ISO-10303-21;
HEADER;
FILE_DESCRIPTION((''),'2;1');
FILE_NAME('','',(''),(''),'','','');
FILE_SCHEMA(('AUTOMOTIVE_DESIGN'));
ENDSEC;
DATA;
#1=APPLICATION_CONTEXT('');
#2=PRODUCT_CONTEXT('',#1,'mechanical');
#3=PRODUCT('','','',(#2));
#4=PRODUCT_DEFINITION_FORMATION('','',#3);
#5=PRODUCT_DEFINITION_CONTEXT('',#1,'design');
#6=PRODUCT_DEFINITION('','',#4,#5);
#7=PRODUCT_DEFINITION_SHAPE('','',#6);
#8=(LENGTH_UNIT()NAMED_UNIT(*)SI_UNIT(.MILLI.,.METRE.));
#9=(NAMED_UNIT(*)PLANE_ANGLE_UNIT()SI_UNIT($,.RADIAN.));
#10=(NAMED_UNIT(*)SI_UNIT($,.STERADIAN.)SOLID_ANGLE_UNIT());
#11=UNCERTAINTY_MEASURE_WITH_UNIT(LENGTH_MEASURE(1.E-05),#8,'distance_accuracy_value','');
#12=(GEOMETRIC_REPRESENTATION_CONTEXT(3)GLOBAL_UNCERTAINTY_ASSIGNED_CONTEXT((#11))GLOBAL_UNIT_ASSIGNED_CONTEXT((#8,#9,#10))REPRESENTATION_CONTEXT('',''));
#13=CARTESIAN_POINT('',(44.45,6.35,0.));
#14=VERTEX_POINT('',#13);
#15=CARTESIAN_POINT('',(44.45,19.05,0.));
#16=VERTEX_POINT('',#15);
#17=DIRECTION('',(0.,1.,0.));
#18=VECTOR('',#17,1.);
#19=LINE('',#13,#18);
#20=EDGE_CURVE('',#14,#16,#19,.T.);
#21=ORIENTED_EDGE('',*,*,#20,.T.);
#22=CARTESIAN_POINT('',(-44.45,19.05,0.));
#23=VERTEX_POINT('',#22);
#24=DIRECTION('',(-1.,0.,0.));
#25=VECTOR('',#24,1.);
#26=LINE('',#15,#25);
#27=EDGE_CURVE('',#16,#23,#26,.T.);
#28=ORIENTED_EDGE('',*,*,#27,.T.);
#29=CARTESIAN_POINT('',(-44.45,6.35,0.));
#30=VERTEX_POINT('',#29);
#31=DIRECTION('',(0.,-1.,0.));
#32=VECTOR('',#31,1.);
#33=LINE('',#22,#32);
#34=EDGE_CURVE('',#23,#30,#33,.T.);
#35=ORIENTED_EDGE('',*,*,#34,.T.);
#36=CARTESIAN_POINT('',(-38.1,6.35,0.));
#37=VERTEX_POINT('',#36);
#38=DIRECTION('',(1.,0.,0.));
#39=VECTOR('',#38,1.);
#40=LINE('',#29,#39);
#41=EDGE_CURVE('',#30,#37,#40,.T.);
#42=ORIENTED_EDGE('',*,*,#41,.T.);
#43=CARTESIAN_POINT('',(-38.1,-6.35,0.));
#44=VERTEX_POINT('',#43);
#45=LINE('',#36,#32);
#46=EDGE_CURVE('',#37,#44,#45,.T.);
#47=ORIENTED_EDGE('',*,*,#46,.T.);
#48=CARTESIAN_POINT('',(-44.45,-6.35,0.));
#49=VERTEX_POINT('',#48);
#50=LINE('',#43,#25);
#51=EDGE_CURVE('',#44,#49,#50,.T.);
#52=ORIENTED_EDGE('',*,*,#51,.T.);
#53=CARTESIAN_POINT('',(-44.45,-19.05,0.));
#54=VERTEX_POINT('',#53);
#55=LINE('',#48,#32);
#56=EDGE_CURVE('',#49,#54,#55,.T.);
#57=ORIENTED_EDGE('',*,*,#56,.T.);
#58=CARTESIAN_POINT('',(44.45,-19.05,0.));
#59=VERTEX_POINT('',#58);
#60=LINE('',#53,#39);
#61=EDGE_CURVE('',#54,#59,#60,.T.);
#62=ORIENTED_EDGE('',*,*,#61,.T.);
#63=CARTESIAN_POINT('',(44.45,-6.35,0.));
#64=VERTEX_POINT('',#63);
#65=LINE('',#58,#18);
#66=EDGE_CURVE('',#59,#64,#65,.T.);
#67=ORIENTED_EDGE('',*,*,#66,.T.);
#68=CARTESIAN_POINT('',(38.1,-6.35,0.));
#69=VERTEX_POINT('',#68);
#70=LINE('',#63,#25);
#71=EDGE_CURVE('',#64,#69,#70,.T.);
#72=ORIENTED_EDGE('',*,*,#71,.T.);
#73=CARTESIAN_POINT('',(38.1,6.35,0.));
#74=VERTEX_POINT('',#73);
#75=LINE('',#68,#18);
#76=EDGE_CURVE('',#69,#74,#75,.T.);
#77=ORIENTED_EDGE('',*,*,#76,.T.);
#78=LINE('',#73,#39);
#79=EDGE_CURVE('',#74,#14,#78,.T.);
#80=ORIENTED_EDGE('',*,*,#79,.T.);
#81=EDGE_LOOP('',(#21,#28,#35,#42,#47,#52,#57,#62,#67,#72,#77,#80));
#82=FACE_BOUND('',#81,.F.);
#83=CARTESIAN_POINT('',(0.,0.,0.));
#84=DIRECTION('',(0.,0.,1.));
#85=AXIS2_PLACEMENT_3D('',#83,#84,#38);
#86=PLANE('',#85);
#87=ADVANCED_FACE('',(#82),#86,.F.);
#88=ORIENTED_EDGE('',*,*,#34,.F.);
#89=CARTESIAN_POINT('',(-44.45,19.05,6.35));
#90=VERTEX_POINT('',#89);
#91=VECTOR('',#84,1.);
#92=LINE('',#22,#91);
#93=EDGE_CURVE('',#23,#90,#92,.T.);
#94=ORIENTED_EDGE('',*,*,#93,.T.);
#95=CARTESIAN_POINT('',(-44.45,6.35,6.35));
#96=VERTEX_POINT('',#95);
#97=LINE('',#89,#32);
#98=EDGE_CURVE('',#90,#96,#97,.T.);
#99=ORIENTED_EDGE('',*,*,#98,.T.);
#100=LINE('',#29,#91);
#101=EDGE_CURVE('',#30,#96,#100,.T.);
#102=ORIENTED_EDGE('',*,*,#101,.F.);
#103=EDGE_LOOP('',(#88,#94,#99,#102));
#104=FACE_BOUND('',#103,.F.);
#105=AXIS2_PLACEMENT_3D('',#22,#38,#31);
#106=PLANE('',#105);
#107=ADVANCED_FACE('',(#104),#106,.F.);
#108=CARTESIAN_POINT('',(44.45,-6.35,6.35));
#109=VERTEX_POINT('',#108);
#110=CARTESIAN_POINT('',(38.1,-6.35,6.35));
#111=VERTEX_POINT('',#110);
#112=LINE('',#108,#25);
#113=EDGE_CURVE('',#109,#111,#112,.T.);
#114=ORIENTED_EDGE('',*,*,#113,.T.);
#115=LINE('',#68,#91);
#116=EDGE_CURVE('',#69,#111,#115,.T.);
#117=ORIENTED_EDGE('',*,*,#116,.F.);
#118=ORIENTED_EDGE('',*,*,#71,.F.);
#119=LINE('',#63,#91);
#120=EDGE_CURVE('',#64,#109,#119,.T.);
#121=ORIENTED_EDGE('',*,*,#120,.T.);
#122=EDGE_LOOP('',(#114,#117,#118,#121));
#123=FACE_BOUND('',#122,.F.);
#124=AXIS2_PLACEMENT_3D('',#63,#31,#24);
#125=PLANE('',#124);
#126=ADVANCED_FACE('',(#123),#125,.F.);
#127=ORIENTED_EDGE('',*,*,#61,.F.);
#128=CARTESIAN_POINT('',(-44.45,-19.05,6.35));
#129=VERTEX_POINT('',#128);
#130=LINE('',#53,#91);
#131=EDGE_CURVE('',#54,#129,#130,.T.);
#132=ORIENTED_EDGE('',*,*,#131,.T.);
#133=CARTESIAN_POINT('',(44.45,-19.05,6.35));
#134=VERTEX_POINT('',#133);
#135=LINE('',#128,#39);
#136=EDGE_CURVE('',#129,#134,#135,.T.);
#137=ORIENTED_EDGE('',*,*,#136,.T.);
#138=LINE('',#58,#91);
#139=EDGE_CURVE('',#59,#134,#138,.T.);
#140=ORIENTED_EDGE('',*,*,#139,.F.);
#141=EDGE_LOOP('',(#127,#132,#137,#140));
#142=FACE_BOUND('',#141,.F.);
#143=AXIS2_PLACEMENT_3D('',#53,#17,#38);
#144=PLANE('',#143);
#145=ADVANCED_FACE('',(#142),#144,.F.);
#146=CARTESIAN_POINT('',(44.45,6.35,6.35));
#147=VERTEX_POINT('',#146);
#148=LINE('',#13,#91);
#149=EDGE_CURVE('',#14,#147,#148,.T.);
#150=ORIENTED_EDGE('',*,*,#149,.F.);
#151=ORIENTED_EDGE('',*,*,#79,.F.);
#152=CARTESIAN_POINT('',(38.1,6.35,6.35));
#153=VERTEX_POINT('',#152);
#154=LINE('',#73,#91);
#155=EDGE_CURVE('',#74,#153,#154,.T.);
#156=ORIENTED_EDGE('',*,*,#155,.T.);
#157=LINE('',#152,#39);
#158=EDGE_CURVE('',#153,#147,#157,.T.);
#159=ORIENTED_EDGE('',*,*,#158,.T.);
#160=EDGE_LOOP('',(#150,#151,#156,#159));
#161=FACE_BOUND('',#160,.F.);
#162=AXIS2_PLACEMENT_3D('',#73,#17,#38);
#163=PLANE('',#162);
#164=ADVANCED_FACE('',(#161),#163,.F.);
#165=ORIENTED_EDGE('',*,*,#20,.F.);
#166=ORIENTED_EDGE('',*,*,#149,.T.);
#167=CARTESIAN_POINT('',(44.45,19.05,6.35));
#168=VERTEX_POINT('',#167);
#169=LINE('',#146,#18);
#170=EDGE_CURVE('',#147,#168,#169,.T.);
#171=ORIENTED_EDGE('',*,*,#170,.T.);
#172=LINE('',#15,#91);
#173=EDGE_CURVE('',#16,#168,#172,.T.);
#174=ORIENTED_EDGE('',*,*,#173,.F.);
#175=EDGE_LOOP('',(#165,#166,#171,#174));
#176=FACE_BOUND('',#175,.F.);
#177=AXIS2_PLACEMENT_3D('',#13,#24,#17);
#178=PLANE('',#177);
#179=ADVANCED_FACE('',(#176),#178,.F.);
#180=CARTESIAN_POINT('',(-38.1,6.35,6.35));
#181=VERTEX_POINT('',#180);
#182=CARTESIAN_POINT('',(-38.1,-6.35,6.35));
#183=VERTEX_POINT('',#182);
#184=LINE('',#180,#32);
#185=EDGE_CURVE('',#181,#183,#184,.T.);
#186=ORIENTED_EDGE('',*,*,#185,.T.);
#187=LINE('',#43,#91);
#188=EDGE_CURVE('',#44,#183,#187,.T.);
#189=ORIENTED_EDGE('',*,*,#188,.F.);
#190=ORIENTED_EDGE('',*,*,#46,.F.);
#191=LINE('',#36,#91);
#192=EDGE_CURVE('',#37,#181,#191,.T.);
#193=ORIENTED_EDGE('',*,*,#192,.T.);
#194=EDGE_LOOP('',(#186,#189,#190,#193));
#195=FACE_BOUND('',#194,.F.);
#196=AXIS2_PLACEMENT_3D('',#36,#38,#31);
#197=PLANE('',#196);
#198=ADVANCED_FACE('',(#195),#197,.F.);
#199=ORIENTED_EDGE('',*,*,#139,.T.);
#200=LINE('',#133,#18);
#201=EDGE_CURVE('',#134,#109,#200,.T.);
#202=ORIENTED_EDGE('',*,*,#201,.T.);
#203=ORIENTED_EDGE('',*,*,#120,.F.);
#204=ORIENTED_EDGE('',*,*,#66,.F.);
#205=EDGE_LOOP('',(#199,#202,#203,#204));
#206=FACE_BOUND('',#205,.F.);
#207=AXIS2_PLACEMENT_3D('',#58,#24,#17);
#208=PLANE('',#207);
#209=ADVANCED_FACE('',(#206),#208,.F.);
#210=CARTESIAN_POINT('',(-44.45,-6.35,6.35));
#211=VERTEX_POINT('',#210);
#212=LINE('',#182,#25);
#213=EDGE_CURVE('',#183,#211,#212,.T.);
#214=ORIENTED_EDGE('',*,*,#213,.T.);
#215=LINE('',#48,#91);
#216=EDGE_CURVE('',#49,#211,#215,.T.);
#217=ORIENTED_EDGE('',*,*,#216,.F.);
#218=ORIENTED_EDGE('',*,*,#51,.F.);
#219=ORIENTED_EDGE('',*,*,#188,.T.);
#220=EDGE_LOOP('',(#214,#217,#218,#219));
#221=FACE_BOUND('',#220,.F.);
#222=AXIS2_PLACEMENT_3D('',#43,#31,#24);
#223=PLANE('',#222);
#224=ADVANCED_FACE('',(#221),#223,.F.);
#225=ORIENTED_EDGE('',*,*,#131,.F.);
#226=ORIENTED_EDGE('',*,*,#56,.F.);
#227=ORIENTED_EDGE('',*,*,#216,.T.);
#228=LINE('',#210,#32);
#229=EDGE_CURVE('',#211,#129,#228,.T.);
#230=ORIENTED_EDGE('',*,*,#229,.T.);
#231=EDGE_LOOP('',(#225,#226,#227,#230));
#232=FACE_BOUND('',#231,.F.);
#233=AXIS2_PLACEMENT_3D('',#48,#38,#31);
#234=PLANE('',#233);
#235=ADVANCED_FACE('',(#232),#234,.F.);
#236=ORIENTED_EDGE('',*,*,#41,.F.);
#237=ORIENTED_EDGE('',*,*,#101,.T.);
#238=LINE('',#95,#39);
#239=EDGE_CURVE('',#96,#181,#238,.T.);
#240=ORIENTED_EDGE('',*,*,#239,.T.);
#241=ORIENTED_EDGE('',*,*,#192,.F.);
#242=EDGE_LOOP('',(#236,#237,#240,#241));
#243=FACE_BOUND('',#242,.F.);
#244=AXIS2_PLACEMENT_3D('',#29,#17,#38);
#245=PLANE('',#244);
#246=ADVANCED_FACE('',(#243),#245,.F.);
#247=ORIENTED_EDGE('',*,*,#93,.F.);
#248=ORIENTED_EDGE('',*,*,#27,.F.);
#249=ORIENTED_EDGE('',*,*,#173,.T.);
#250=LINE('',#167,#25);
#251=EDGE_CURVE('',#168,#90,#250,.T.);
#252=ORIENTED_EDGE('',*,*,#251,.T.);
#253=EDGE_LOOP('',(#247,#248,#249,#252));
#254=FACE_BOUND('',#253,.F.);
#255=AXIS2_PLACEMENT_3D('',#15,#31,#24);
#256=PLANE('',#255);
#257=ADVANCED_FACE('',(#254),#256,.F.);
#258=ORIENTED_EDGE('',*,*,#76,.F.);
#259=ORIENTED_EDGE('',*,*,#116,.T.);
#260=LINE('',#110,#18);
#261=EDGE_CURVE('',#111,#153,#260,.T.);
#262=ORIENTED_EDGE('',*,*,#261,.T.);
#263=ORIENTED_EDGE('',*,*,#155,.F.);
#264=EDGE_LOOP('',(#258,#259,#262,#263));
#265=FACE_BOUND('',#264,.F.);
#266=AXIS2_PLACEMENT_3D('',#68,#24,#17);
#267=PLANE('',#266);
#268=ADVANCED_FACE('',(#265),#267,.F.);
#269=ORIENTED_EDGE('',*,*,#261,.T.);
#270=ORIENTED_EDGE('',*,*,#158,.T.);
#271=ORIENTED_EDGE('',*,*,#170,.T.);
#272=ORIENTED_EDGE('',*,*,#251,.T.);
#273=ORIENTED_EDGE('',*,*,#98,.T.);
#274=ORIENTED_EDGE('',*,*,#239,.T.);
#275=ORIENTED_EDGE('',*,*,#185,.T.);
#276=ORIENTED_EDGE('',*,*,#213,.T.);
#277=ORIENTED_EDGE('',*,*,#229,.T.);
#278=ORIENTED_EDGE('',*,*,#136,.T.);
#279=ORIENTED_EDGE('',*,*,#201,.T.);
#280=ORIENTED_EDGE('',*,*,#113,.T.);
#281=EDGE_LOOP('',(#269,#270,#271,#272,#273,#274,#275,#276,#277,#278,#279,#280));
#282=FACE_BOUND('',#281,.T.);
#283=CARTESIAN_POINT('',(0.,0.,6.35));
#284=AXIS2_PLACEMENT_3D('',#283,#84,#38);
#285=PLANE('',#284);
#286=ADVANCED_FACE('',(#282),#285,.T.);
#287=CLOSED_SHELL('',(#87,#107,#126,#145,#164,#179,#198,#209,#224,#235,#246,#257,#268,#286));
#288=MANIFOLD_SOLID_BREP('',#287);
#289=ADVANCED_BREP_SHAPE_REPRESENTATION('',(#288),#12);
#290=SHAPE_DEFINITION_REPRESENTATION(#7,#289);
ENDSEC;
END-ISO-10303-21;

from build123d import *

# Parameters (mm, degrees)
F1_DEPTH = 6.35


# Not quite as in the source:
# - a feature names something its author has since deleted; it is built from what else it names


with BuildPart() as f1:
    # F0 (on Top) → F1 (new body)
    with BuildSketch(Plane.XY):
        Polygon((44.45, 19.05), (38.1, 19.05), (-38.1, 19.05), (-44.45, 19.05), (-44.45, 6.35), (-38.1, 6.35), (-38.1, -6.35), (-44.45, -6.35), (-44.45, -19.05), (-38.1, -19.05), (38.1, -19.05), (44.45, -19.05), (44.45, -6.35), (38.1, -6.35), (38.1, 6.35), (44.45, 6.35), align=None)
    extrude(amount=F1_DEPTH)


solid = f1.part
